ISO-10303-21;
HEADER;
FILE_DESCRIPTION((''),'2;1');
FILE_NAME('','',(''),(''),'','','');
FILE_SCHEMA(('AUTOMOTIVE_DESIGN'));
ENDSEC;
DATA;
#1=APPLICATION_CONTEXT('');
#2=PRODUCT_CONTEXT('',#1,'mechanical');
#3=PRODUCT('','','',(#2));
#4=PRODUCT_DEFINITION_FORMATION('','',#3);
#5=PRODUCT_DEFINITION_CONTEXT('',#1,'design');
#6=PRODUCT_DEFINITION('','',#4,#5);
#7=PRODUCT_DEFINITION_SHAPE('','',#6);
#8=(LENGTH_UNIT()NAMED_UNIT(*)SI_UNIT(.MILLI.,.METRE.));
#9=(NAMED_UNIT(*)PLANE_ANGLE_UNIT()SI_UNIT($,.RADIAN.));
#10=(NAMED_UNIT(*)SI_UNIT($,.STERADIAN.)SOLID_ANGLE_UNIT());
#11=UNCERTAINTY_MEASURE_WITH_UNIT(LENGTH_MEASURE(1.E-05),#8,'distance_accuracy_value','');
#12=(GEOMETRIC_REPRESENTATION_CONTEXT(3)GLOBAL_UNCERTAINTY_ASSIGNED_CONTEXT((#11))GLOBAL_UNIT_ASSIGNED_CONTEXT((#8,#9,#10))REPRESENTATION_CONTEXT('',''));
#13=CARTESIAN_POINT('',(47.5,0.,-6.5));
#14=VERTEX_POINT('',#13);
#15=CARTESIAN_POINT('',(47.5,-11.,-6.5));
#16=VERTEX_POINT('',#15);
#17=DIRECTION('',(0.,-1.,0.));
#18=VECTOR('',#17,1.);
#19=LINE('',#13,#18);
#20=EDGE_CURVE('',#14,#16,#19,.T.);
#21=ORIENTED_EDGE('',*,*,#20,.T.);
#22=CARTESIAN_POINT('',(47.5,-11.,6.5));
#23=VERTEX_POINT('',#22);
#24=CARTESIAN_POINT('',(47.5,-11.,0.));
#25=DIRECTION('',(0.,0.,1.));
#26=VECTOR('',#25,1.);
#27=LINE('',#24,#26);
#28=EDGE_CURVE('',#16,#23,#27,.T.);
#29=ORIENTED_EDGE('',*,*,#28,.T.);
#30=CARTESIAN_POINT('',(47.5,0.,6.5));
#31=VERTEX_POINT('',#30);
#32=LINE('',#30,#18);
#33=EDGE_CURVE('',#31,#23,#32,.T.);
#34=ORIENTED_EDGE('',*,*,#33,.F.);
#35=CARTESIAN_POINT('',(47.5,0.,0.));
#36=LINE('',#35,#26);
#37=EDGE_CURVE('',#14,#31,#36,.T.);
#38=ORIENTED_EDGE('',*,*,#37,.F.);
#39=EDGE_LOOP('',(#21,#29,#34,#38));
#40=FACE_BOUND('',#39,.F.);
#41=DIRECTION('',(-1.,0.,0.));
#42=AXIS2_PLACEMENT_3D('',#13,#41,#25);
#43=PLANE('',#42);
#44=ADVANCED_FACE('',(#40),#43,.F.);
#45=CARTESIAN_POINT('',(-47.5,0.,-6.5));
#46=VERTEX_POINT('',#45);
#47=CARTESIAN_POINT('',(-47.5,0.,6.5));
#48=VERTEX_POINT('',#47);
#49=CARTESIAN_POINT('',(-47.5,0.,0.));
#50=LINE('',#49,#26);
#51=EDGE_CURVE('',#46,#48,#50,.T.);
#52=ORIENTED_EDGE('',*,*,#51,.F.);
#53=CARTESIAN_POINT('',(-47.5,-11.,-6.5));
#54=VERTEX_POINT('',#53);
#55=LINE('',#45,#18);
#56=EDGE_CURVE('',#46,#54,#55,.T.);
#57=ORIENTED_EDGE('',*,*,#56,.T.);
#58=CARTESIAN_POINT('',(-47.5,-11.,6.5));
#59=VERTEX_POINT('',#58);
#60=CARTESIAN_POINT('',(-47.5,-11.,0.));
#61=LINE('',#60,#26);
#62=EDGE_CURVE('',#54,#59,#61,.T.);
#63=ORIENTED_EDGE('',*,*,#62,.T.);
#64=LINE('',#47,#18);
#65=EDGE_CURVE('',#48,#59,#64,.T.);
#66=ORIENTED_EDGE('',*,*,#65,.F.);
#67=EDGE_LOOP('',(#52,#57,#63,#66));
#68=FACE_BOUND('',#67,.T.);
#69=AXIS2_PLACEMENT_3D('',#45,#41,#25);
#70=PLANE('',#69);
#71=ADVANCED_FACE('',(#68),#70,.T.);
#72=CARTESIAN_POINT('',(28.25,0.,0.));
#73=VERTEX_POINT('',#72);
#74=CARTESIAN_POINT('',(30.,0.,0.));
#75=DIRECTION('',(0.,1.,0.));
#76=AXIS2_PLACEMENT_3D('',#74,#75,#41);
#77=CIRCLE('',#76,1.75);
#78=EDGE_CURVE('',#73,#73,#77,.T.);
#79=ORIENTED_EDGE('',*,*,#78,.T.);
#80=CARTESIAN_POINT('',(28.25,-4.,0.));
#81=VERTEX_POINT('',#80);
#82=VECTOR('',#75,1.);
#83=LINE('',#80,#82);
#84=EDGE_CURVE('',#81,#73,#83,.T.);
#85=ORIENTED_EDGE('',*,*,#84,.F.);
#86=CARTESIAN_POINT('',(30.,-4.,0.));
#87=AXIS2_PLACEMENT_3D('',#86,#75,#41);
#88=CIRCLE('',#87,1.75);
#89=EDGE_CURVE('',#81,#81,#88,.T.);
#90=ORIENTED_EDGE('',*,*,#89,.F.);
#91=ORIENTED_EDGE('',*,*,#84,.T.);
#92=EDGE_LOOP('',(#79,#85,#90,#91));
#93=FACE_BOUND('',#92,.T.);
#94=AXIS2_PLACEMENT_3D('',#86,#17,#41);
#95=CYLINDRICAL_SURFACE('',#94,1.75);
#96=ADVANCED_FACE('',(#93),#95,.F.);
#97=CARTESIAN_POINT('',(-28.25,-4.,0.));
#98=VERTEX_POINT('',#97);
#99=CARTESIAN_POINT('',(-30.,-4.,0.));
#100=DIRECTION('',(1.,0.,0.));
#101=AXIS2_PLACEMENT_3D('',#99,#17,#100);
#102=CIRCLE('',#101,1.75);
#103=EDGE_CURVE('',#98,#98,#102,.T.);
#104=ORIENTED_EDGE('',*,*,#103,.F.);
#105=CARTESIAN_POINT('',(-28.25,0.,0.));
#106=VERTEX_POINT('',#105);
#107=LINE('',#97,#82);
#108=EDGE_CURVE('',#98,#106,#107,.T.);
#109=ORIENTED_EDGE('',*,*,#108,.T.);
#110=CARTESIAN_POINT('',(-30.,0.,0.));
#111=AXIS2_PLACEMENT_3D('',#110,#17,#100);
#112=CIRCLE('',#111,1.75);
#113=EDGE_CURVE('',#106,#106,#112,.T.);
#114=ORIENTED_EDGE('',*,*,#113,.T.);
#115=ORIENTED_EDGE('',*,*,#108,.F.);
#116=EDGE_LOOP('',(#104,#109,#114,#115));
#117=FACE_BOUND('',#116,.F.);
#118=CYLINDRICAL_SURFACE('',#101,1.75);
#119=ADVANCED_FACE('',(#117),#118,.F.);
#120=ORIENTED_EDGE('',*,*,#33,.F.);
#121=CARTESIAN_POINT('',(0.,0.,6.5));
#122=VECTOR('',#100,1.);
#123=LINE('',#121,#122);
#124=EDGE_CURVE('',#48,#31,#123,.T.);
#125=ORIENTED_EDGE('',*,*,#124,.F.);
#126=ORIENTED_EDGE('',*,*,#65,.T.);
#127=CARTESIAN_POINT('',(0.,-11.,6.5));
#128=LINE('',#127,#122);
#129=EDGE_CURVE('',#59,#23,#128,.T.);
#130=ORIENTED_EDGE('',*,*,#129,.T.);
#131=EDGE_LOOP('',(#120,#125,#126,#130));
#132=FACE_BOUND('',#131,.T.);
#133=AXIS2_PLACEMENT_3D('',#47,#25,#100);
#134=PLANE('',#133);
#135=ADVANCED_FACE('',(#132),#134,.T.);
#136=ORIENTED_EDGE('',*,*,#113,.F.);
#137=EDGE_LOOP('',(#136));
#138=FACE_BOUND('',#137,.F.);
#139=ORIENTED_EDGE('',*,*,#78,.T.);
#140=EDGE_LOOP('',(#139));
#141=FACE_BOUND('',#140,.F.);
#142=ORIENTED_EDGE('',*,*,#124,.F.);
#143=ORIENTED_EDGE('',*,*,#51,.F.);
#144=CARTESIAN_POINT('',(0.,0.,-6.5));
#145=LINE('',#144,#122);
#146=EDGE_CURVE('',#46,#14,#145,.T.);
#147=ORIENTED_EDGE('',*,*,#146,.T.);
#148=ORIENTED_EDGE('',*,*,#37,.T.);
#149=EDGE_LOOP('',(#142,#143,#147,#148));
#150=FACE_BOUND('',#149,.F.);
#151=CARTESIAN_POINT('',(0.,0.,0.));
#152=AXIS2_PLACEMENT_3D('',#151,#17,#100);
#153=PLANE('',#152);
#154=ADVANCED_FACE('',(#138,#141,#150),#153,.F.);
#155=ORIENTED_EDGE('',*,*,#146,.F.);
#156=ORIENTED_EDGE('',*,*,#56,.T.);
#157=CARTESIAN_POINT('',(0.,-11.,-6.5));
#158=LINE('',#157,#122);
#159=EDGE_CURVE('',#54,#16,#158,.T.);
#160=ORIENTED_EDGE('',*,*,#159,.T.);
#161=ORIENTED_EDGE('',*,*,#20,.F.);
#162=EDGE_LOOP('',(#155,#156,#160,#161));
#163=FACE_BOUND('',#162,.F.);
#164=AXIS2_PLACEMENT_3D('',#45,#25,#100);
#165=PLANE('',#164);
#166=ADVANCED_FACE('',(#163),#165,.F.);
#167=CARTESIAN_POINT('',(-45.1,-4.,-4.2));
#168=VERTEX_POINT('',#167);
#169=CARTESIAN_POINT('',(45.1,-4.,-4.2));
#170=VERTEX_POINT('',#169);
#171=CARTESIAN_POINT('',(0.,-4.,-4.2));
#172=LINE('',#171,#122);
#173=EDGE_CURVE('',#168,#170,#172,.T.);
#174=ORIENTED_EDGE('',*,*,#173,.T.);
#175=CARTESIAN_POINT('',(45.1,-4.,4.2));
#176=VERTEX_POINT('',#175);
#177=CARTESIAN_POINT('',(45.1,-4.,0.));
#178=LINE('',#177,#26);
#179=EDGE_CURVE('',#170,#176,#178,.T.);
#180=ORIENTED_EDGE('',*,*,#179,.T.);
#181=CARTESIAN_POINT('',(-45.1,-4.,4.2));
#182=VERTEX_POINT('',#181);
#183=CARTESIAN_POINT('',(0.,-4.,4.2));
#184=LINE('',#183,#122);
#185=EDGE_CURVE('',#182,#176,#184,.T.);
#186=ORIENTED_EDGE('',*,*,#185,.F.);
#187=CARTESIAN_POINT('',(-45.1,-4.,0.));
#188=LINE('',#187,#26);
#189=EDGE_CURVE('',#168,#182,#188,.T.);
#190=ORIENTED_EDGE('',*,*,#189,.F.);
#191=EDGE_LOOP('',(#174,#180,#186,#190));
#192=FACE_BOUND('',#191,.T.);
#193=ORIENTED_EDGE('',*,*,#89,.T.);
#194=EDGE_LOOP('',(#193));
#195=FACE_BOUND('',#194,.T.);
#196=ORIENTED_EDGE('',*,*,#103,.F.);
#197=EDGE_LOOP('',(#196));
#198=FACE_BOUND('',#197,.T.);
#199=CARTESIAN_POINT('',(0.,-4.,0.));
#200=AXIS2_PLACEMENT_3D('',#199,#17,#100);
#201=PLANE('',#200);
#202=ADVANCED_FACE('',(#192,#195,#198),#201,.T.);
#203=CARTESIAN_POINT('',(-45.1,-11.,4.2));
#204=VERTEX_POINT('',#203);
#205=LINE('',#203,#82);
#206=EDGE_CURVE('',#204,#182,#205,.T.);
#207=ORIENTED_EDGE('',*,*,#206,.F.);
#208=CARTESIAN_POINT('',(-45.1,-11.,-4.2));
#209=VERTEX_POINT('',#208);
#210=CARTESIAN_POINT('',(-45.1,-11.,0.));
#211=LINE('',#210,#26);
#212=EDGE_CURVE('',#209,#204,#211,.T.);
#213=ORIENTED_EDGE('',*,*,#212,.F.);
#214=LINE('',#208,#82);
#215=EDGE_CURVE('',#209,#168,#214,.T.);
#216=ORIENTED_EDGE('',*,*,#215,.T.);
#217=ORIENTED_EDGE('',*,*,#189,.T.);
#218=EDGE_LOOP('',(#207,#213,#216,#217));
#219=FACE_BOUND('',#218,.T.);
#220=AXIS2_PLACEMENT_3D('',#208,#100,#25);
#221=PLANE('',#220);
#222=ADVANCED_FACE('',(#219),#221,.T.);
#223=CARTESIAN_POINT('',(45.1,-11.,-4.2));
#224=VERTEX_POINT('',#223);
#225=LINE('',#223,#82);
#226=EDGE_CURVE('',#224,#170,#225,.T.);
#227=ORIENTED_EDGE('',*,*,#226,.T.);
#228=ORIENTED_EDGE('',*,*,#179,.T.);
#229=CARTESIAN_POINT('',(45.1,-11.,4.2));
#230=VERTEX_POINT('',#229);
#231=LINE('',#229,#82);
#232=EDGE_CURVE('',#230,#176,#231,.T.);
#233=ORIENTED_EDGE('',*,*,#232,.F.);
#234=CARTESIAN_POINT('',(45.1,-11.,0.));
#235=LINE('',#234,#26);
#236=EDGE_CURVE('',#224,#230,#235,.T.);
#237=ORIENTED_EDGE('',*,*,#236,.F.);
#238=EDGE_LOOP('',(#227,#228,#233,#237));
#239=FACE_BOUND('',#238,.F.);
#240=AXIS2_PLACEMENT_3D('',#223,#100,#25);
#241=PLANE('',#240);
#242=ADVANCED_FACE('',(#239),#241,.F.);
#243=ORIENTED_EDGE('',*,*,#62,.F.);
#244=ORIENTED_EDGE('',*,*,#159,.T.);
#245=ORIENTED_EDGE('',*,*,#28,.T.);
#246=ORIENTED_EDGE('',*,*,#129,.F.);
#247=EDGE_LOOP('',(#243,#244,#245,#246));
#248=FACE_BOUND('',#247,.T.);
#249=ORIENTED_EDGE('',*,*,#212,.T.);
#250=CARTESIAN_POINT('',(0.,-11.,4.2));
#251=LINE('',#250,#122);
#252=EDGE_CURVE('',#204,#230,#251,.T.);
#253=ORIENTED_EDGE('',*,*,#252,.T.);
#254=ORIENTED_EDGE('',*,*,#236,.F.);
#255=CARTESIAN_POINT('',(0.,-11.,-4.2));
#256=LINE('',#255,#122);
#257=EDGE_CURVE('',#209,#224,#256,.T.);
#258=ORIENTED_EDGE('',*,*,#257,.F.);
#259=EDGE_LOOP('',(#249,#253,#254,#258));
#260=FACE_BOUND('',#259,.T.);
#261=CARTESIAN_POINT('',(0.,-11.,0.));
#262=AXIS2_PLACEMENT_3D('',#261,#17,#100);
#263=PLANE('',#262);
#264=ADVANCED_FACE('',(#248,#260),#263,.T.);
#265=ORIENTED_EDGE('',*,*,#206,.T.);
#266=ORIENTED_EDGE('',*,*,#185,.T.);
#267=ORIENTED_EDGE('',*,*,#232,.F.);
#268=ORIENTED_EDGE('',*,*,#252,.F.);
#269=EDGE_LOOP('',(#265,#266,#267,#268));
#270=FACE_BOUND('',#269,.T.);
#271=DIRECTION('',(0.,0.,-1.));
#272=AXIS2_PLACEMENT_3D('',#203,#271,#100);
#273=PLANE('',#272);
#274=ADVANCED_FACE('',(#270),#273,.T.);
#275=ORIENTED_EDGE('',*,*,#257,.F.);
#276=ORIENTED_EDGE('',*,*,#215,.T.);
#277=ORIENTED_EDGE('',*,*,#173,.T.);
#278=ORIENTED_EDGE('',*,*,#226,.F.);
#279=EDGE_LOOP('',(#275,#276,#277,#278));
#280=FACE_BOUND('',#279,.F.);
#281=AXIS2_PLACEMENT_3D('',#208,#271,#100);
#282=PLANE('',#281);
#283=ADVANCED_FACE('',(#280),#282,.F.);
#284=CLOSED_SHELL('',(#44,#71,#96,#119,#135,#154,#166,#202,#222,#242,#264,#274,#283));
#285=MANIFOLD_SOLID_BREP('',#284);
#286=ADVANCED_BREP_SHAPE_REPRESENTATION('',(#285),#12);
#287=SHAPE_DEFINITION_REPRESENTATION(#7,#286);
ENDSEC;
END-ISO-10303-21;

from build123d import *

# Parameters (mm, degrees)
F0_W     = 95
F0_H     = 13
F1_DEPTH = 11
F2_W     = 90.2
F2_H     = 8.4
F3_DEPTH = 7
F4_R     = 1.75
F5_DEPTH = 4


# Not quite as in the source:
# - a pattern or mirror of a feature is missing from the dataset's text; its kind, count and spacing are read off the source's solid


with BuildPart() as f1:
    # F0 (on Front) → F1 (new body)
    with BuildSketch(Plane.XZ):
        Rectangle(F0_W, F0_H)
    extrude(amount=F1_DEPTH)

    # F2 (on face) → F3 (cut)
    with BuildSketch(Plane.XZ.offset(11)):
        Rectangle(F2_W, F2_H)
    extrude(amount=-F3_DEPTH, mode=Mode.SUBTRACT)

    # F4 (on face) → F5 (cut, through all)
    with BuildSketch(Plane.XZ.offset(4)):
        with Locations((-30, 0)):
            Circle(F4_R)
    f5 = extrude(amount=-F5_DEPTH, mode=Mode.SUBTRACT)

    # F5_copies: F5 across plane
    add(f5.mirror(Plane(origin=(0, 0, 0), x_dir=(0, 0, 1), z_dir=(1, 0, 0))), mode=Mode.SUBTRACT)


solid = f1.part
